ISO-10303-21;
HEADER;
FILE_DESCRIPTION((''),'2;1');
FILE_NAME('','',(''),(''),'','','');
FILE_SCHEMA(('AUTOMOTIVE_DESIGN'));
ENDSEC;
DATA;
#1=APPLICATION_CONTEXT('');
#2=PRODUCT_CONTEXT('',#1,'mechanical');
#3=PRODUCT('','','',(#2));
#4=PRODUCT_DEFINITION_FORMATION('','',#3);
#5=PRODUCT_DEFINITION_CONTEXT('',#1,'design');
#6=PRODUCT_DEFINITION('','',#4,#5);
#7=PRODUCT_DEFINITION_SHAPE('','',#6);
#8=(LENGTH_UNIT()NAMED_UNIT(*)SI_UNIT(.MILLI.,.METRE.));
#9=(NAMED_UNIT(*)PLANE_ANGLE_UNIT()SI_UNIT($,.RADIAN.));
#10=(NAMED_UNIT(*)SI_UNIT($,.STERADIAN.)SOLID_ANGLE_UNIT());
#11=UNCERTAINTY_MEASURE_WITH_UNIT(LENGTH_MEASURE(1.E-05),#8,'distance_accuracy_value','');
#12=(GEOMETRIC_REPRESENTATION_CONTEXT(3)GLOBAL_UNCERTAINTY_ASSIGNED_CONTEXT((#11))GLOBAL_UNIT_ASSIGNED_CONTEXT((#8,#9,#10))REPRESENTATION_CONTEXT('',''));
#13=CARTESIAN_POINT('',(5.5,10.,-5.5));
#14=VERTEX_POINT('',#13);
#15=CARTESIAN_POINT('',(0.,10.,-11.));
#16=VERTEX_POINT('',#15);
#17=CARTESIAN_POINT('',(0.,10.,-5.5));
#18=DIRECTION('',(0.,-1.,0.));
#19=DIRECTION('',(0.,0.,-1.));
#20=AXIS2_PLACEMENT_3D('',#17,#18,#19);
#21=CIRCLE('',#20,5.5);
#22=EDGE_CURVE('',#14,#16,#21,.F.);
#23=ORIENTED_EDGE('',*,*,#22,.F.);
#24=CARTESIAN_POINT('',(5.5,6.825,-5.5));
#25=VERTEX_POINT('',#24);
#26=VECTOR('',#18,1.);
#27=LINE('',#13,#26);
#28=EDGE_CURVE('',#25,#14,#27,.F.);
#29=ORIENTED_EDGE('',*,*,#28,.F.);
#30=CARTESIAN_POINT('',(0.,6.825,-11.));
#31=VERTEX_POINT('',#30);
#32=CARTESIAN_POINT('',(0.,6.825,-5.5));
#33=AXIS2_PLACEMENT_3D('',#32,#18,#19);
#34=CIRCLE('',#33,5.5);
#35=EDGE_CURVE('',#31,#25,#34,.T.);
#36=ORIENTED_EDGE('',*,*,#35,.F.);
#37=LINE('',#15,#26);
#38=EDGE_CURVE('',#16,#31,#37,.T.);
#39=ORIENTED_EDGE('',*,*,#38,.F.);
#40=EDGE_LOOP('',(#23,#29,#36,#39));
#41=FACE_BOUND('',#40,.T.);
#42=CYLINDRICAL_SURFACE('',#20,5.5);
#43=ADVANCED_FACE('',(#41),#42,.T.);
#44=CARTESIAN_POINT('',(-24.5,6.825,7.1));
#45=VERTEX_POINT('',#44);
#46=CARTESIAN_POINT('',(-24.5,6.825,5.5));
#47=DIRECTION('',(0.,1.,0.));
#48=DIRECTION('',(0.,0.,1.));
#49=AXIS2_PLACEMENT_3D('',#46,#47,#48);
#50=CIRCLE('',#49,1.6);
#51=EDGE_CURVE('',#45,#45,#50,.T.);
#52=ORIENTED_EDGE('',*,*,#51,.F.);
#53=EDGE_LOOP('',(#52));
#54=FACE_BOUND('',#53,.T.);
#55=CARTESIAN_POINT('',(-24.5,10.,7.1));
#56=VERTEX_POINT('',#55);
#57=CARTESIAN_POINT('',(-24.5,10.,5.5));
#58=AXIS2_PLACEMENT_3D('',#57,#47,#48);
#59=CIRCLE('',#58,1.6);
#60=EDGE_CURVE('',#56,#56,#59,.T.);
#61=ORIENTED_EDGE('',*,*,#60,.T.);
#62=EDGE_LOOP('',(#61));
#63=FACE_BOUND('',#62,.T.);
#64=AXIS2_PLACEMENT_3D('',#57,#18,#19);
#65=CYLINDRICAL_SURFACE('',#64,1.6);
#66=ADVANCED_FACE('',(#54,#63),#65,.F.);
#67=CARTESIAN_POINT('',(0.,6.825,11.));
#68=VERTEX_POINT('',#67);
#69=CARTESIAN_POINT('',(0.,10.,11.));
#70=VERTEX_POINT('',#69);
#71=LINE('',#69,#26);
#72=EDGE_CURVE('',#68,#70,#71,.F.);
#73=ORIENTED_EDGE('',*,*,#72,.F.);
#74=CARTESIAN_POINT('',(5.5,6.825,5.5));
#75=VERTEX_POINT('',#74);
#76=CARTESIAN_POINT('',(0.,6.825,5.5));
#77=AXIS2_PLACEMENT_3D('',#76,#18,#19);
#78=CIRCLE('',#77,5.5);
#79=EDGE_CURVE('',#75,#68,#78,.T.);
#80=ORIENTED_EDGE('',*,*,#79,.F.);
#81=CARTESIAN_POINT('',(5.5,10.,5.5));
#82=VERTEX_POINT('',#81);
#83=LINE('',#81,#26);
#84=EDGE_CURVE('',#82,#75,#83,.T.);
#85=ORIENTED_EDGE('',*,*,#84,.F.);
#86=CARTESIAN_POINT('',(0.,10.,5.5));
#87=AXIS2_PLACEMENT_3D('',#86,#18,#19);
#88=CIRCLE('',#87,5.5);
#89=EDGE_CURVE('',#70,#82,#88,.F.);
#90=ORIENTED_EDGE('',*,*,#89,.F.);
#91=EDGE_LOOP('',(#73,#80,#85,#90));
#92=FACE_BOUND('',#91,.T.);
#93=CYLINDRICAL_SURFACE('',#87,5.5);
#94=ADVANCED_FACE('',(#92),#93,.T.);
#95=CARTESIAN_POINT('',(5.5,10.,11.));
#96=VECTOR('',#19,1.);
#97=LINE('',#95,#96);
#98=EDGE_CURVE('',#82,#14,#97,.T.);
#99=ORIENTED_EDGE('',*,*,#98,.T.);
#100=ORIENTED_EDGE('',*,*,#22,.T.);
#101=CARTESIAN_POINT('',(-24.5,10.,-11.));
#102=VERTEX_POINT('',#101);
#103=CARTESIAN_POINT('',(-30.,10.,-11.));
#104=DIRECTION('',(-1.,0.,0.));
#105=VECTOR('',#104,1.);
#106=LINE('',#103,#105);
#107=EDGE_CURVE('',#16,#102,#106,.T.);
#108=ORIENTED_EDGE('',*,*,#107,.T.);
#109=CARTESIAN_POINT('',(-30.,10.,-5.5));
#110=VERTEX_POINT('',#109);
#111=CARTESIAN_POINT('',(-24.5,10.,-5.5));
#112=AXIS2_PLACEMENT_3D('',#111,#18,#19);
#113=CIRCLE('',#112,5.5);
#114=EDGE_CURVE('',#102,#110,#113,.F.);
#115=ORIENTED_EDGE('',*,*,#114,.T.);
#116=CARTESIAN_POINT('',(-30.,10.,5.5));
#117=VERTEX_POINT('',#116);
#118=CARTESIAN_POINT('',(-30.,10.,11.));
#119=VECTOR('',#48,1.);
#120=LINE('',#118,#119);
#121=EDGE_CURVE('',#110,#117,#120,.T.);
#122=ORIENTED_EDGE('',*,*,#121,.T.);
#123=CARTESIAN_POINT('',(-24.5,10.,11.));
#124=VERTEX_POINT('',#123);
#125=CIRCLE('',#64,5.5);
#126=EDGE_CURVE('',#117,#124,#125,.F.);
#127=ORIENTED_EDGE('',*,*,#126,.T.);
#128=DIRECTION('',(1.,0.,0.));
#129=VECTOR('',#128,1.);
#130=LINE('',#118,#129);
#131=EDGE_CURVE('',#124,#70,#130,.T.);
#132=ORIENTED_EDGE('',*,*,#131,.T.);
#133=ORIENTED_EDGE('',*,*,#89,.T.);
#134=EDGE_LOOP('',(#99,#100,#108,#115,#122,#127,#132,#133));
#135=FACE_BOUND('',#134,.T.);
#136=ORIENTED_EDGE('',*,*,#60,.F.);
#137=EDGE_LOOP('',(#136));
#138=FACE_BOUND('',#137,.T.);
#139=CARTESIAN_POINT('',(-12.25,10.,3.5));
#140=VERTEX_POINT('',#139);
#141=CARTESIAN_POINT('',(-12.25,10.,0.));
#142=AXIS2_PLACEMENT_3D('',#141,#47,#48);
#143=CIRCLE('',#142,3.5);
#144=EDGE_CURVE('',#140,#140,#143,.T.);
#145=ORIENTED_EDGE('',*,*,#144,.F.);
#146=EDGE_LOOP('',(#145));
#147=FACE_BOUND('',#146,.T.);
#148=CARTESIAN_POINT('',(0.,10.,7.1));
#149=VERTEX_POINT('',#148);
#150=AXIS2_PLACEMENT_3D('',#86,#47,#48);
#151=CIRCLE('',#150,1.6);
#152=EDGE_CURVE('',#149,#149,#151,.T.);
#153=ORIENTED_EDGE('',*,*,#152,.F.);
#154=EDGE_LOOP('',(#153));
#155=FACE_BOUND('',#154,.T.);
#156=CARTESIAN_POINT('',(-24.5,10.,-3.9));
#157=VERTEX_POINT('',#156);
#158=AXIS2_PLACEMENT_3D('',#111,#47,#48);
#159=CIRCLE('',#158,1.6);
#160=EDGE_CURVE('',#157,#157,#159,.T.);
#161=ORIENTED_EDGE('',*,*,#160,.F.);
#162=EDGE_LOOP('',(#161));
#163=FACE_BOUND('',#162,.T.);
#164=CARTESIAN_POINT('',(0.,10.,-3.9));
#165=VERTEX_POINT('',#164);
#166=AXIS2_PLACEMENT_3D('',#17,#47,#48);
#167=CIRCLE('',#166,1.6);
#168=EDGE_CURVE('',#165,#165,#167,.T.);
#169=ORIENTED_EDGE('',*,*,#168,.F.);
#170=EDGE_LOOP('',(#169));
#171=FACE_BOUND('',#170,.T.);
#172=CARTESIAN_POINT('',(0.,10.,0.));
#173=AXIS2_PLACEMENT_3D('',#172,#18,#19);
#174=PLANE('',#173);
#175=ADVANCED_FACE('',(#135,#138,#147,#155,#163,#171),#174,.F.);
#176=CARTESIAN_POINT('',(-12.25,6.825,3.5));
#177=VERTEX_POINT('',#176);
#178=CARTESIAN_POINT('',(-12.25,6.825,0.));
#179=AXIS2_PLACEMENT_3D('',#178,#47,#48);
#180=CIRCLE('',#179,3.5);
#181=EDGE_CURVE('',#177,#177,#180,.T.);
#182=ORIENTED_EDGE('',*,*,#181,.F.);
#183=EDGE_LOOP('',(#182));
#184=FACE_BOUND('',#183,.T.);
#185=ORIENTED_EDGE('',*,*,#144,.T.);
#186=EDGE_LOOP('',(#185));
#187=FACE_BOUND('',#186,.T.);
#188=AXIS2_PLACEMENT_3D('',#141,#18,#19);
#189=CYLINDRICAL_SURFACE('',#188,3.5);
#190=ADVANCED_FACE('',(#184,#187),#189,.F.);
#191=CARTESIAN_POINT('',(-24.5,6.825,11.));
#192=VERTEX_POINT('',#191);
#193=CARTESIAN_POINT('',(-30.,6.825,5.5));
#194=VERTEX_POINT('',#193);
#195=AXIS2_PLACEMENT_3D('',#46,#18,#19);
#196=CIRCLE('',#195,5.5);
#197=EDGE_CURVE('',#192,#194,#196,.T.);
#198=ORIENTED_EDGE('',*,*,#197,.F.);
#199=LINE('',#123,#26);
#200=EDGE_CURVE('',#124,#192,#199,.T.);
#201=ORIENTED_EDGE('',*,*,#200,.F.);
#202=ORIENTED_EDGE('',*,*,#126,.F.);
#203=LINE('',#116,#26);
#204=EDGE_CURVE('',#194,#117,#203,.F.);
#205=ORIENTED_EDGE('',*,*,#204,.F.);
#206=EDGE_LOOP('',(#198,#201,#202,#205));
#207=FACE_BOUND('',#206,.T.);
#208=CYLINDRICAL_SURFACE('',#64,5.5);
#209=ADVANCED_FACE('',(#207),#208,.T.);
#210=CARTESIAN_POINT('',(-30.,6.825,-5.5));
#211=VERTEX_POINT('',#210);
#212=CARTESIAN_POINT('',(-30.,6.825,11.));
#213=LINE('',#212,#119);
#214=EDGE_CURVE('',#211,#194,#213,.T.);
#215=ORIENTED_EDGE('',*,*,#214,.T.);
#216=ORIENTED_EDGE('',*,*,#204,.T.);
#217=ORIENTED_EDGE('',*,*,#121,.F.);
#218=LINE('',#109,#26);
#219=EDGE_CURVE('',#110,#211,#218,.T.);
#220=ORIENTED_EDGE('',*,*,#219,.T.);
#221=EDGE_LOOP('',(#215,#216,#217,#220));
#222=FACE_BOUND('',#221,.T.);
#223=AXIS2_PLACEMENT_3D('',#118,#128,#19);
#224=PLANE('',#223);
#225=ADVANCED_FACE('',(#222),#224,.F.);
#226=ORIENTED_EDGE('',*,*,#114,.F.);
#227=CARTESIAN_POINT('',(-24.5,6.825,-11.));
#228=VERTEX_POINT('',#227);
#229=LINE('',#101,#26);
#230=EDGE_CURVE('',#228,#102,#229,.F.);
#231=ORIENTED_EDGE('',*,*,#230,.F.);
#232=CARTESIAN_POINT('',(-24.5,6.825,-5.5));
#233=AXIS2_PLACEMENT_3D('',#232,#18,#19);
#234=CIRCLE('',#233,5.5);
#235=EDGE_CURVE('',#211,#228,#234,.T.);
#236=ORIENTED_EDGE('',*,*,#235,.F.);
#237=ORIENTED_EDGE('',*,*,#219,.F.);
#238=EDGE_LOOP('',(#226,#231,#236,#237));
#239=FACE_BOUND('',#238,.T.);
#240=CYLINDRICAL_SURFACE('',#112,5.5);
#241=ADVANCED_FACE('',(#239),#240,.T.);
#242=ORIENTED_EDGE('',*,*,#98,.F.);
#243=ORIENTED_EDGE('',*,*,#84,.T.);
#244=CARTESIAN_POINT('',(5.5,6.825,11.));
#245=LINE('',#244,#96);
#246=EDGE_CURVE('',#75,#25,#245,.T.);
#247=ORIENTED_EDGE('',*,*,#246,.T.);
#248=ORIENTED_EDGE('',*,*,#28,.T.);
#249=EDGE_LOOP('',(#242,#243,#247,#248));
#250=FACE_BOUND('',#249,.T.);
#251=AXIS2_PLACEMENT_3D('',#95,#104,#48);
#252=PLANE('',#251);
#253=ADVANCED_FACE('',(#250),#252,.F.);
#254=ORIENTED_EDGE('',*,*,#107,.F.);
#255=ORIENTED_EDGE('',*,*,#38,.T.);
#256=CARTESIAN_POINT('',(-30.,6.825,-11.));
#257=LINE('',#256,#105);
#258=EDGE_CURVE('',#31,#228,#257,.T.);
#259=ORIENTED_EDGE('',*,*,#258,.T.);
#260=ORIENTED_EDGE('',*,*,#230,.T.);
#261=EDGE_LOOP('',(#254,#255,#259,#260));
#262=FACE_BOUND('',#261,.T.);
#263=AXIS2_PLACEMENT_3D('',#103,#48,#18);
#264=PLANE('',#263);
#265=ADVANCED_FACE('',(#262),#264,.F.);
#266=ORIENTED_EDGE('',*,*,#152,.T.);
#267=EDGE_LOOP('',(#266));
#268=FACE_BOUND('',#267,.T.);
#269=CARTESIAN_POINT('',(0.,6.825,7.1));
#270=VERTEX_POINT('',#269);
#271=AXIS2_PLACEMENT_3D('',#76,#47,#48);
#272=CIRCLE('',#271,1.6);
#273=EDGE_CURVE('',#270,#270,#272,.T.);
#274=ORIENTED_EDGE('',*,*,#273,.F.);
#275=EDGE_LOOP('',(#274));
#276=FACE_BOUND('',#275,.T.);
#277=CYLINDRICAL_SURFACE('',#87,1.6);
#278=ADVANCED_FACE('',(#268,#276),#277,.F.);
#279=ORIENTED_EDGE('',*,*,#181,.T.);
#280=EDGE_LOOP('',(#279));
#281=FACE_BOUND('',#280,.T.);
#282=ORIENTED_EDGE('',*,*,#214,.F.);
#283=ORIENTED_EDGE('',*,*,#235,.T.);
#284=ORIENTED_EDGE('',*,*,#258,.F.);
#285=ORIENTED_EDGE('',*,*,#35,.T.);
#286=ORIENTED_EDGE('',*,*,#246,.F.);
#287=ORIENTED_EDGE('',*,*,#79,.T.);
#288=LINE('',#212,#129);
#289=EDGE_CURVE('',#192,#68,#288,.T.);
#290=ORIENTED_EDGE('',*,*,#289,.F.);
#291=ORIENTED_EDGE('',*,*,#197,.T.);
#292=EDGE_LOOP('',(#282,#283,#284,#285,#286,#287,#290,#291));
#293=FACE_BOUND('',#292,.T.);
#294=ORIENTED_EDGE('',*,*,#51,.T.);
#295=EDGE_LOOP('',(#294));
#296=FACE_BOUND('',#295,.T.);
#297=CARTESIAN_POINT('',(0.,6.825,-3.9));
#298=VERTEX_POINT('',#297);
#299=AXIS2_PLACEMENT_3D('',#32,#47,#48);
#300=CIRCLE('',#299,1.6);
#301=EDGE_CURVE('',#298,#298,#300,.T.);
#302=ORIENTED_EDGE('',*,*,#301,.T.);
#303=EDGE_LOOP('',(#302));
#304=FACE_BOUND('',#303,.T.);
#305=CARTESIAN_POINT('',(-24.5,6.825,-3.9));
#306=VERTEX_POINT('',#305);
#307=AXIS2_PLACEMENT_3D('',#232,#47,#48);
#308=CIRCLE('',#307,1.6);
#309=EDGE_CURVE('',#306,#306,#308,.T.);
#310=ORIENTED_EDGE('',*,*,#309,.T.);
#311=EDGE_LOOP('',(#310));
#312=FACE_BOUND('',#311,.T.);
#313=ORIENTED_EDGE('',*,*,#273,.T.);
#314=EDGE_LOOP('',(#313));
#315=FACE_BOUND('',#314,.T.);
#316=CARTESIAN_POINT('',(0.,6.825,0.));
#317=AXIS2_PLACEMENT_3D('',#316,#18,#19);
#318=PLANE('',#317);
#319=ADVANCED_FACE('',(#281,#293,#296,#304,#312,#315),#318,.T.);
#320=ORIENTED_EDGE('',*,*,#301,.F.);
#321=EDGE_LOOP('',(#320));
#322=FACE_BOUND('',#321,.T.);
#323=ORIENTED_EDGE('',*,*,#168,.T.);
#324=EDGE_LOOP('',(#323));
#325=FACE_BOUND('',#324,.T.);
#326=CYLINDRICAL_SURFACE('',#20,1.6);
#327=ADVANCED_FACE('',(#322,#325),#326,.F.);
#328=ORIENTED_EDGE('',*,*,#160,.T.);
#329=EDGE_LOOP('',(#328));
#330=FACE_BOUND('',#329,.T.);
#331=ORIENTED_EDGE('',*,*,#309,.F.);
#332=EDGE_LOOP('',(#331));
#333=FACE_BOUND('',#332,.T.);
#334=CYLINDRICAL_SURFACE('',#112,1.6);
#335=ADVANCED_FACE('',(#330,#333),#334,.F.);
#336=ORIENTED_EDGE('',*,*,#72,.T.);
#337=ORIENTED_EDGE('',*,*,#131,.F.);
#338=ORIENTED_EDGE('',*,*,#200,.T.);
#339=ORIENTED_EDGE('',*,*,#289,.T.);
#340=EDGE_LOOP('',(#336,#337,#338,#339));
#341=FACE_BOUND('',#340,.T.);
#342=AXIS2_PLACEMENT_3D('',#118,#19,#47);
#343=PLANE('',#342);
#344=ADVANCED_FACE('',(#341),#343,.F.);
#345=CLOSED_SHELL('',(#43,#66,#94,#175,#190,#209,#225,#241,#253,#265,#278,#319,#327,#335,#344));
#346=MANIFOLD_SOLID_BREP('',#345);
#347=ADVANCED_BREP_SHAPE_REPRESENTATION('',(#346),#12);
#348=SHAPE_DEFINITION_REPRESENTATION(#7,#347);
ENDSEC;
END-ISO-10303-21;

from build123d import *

# Parameters (mm, degrees)
SKETCH2_W             = 22
SKETCH2_H             = 17.825
SKETCH2_R             = 2.85
BOSS_EXTRUDE1_DEPTH   = 5.5
FILLET1_R             = 10
FILLET2_R             = 5.5
SKETCH4_R             = 2.55
CUT_EXTRUDE1_DEPTH    = 5.5
CHAMFER1_SIZE         = 0.4
CHAMFER1_SIZE2        = 1.098990968
CHAMFER4_SIZE         = 0.4
CHAMFER5_SIZE         = 0.4
CHAMFER5_SIZE2        = 1.098990968
BODY_MOVE_COPY1_ANGLE = 180
SKETCH5_W             = 35.5
SKETCH5_H             = 22
SKETCH5_R             = 1.6
SKETCH5_R_2           = 3.5
BOSS_EXTRUDE2_DEPTH   = 3.175
FILLET3_R             = 5.5


with BuildPart() as part:
    # Sketch2 → Boss-Extrude1 (new, symmetric)
    with BuildSketch(Plane(origin=(0, 0, 0), x_dir=(0, 0, -1), z_dir=(1, 0, 0))):
        with Locations((0, -2.0875)):
            Rectangle(SKETCH2_W, SKETCH2_H)
        Circle(SKETCH2_R, mode=Mode.SUBTRACT)
    extrude(amount=BOSS_EXTRUDE1_DEPTH, both=True)

    # Fillet1
    fillet1_edges = [part.edges().sort_by_distance(p)[0] for p in [
        (0, -11, -11),
        (0, -11, 11),
    ]]
    fillet(fillet1_edges, radius=FILLET1_R)

    # Fillet2
    fillet2_edges = [part.edges().sort_by_distance(p)[0] for p in [
        (-5.5, 2.9125, -11),
        (-5.5, -8.071067812, -8.071067812),
        (-5.5, -8.071067812, 8.071067812),
        (5.5, 2.9125, -11),
        (5.5, -8.071067812, -8.071067812),
        (5.5, -8.071067812, 8.071067812),
        (-5.5, 2.9125, 11),
        (5.5, 2.9125, 11),
        (-5.5, -11, 0),
        (5.5, -11, 0),
    ]]
    fillet(fillet2_edges, radius=FILLET2_R - 0.0001)  # a hair under: the kernel refuses the full size

    # Sketch4 → Cut-Extrude1 (cut)
    with BuildSketch(Plane(origin=(0, 6.825, 0), x_dir=(1, 0, 0), z_dir=(0, 1, 0))):
        with Locations(Location((0, 5.5, 0), (0, 0, 270))):
            Circle(SKETCH4_R)
        with Locations(Location((0, -5.5, 0), (0, 0, 270))):
            Circle(SKETCH4_R)
    extrude(amount=-CUT_EXTRUDE1_DEPTH, mode=Mode.SUBTRACT)

    # Chamfer1
    chamfer1_edges = [part.edges().sort_by_distance(p)[0] for p in [
        (-5.5, 0, 2.85),
    ]]
    chamfer1_side = [part.faces().sort_by_distance(p)[0] for p in [
        (-5.5, 6.659799367, 0),
    ]]
    chamfer(chamfer1_edges, length=CHAMFER1_SIZE, length2=CHAMFER1_SIZE2, reference=chamfer1_side[0])

    # Chamfer4
    chamfer4_edges = [part.edges().sort_by_distance(p)[0] for p in [
        (-5.5, 6.825, 0),
        (5.5, 6.825, 0),
        (3.889116586, 6.825, 9.389116586),
        (-3.889116586, 6.825, 9.389116586),
        (3.889116586, 6.825, -9.389116586),
        (-3.889116586, 6.825, -9.389116586),
    ]]
    chamfer(chamfer4_edges, length=CHAMFER4_SIZE)

    # Chamfer5
    chamfer5_edges = [part.edges().sort_by_distance(p)[0] for p in [
        (0, 6.825, -8.05),
        (0, 6.825, 2.95),
    ]]
    chamfer5_side = [part.faces().sort_by_distance(p)[0] for p in [
        (0, 6.825, 0),
    ]]
    chamfer(chamfer5_edges, length=CHAMFER5_SIZE, length2=CHAMFER5_SIZE2, reference=chamfer5_side[0])


with BuildPart() as body_2:
    # Body-Move/Copy1: copy of part
    add(part.part.rotate(Axis((0, 0, 0), (0, 1, 0)), BODY_MOVE_COPY1_ANGLE))


with BuildPart() as part_1:
    # Body-Move/Copy3: read off the stored shape, not the designer's step
    # Body-Move/Copy3: moved
    add(part.part.moved(Location((-24.5, 0, 0))))


with BuildPart() as body_3:
    # Sketch5 → Boss-Extrude2 (new body)
    with BuildSketch(Plane(origin=(0, 6.825, 0), x_dir=(1, 0, 0), z_dir=(0, 1, 0))):
        with Locations((-12.25, 0)):
            Rectangle(SKETCH5_W, SKETCH5_H)
        with Locations(Location((-24.5, 5.5, 0), (0, 0, 270))):
            Circle(SKETCH5_R, mode=Mode.SUBTRACT)
        with Locations(Location((0, -5.5, 0), (0, 0, 270))):
            Circle(SKETCH5_R, mode=Mode.SUBTRACT)
        with Locations(Location((0, 5.5, 0), (0, 0, 270))):
            Circle(SKETCH5_R, mode=Mode.SUBTRACT)
        with Locations(Location((-24.5, -5.5, 0), (0, 0, 270))):
            Circle(SKETCH5_R, mode=Mode.SUBTRACT)
        with Locations(Location((-12.25, 0, 0), (0, 0, 270))):
            Circle(SKETCH5_R_2, mode=Mode.SUBTRACT)
    extrude(amount=BOSS_EXTRUDE2_DEPTH)

    # Fillet3
    fillet3_edges = [body_3.edges().sort_by_distance(p)[0] for p in [
        (5.5, 8.4125, 11),
        (-30, 8.4125, 11),
        (-30, 8.4125, -11),
        (5.5, 8.4125, -11),
    ]]
    fillet(fillet3_edges, radius=FILLET3_R)


solid = body_3.part
